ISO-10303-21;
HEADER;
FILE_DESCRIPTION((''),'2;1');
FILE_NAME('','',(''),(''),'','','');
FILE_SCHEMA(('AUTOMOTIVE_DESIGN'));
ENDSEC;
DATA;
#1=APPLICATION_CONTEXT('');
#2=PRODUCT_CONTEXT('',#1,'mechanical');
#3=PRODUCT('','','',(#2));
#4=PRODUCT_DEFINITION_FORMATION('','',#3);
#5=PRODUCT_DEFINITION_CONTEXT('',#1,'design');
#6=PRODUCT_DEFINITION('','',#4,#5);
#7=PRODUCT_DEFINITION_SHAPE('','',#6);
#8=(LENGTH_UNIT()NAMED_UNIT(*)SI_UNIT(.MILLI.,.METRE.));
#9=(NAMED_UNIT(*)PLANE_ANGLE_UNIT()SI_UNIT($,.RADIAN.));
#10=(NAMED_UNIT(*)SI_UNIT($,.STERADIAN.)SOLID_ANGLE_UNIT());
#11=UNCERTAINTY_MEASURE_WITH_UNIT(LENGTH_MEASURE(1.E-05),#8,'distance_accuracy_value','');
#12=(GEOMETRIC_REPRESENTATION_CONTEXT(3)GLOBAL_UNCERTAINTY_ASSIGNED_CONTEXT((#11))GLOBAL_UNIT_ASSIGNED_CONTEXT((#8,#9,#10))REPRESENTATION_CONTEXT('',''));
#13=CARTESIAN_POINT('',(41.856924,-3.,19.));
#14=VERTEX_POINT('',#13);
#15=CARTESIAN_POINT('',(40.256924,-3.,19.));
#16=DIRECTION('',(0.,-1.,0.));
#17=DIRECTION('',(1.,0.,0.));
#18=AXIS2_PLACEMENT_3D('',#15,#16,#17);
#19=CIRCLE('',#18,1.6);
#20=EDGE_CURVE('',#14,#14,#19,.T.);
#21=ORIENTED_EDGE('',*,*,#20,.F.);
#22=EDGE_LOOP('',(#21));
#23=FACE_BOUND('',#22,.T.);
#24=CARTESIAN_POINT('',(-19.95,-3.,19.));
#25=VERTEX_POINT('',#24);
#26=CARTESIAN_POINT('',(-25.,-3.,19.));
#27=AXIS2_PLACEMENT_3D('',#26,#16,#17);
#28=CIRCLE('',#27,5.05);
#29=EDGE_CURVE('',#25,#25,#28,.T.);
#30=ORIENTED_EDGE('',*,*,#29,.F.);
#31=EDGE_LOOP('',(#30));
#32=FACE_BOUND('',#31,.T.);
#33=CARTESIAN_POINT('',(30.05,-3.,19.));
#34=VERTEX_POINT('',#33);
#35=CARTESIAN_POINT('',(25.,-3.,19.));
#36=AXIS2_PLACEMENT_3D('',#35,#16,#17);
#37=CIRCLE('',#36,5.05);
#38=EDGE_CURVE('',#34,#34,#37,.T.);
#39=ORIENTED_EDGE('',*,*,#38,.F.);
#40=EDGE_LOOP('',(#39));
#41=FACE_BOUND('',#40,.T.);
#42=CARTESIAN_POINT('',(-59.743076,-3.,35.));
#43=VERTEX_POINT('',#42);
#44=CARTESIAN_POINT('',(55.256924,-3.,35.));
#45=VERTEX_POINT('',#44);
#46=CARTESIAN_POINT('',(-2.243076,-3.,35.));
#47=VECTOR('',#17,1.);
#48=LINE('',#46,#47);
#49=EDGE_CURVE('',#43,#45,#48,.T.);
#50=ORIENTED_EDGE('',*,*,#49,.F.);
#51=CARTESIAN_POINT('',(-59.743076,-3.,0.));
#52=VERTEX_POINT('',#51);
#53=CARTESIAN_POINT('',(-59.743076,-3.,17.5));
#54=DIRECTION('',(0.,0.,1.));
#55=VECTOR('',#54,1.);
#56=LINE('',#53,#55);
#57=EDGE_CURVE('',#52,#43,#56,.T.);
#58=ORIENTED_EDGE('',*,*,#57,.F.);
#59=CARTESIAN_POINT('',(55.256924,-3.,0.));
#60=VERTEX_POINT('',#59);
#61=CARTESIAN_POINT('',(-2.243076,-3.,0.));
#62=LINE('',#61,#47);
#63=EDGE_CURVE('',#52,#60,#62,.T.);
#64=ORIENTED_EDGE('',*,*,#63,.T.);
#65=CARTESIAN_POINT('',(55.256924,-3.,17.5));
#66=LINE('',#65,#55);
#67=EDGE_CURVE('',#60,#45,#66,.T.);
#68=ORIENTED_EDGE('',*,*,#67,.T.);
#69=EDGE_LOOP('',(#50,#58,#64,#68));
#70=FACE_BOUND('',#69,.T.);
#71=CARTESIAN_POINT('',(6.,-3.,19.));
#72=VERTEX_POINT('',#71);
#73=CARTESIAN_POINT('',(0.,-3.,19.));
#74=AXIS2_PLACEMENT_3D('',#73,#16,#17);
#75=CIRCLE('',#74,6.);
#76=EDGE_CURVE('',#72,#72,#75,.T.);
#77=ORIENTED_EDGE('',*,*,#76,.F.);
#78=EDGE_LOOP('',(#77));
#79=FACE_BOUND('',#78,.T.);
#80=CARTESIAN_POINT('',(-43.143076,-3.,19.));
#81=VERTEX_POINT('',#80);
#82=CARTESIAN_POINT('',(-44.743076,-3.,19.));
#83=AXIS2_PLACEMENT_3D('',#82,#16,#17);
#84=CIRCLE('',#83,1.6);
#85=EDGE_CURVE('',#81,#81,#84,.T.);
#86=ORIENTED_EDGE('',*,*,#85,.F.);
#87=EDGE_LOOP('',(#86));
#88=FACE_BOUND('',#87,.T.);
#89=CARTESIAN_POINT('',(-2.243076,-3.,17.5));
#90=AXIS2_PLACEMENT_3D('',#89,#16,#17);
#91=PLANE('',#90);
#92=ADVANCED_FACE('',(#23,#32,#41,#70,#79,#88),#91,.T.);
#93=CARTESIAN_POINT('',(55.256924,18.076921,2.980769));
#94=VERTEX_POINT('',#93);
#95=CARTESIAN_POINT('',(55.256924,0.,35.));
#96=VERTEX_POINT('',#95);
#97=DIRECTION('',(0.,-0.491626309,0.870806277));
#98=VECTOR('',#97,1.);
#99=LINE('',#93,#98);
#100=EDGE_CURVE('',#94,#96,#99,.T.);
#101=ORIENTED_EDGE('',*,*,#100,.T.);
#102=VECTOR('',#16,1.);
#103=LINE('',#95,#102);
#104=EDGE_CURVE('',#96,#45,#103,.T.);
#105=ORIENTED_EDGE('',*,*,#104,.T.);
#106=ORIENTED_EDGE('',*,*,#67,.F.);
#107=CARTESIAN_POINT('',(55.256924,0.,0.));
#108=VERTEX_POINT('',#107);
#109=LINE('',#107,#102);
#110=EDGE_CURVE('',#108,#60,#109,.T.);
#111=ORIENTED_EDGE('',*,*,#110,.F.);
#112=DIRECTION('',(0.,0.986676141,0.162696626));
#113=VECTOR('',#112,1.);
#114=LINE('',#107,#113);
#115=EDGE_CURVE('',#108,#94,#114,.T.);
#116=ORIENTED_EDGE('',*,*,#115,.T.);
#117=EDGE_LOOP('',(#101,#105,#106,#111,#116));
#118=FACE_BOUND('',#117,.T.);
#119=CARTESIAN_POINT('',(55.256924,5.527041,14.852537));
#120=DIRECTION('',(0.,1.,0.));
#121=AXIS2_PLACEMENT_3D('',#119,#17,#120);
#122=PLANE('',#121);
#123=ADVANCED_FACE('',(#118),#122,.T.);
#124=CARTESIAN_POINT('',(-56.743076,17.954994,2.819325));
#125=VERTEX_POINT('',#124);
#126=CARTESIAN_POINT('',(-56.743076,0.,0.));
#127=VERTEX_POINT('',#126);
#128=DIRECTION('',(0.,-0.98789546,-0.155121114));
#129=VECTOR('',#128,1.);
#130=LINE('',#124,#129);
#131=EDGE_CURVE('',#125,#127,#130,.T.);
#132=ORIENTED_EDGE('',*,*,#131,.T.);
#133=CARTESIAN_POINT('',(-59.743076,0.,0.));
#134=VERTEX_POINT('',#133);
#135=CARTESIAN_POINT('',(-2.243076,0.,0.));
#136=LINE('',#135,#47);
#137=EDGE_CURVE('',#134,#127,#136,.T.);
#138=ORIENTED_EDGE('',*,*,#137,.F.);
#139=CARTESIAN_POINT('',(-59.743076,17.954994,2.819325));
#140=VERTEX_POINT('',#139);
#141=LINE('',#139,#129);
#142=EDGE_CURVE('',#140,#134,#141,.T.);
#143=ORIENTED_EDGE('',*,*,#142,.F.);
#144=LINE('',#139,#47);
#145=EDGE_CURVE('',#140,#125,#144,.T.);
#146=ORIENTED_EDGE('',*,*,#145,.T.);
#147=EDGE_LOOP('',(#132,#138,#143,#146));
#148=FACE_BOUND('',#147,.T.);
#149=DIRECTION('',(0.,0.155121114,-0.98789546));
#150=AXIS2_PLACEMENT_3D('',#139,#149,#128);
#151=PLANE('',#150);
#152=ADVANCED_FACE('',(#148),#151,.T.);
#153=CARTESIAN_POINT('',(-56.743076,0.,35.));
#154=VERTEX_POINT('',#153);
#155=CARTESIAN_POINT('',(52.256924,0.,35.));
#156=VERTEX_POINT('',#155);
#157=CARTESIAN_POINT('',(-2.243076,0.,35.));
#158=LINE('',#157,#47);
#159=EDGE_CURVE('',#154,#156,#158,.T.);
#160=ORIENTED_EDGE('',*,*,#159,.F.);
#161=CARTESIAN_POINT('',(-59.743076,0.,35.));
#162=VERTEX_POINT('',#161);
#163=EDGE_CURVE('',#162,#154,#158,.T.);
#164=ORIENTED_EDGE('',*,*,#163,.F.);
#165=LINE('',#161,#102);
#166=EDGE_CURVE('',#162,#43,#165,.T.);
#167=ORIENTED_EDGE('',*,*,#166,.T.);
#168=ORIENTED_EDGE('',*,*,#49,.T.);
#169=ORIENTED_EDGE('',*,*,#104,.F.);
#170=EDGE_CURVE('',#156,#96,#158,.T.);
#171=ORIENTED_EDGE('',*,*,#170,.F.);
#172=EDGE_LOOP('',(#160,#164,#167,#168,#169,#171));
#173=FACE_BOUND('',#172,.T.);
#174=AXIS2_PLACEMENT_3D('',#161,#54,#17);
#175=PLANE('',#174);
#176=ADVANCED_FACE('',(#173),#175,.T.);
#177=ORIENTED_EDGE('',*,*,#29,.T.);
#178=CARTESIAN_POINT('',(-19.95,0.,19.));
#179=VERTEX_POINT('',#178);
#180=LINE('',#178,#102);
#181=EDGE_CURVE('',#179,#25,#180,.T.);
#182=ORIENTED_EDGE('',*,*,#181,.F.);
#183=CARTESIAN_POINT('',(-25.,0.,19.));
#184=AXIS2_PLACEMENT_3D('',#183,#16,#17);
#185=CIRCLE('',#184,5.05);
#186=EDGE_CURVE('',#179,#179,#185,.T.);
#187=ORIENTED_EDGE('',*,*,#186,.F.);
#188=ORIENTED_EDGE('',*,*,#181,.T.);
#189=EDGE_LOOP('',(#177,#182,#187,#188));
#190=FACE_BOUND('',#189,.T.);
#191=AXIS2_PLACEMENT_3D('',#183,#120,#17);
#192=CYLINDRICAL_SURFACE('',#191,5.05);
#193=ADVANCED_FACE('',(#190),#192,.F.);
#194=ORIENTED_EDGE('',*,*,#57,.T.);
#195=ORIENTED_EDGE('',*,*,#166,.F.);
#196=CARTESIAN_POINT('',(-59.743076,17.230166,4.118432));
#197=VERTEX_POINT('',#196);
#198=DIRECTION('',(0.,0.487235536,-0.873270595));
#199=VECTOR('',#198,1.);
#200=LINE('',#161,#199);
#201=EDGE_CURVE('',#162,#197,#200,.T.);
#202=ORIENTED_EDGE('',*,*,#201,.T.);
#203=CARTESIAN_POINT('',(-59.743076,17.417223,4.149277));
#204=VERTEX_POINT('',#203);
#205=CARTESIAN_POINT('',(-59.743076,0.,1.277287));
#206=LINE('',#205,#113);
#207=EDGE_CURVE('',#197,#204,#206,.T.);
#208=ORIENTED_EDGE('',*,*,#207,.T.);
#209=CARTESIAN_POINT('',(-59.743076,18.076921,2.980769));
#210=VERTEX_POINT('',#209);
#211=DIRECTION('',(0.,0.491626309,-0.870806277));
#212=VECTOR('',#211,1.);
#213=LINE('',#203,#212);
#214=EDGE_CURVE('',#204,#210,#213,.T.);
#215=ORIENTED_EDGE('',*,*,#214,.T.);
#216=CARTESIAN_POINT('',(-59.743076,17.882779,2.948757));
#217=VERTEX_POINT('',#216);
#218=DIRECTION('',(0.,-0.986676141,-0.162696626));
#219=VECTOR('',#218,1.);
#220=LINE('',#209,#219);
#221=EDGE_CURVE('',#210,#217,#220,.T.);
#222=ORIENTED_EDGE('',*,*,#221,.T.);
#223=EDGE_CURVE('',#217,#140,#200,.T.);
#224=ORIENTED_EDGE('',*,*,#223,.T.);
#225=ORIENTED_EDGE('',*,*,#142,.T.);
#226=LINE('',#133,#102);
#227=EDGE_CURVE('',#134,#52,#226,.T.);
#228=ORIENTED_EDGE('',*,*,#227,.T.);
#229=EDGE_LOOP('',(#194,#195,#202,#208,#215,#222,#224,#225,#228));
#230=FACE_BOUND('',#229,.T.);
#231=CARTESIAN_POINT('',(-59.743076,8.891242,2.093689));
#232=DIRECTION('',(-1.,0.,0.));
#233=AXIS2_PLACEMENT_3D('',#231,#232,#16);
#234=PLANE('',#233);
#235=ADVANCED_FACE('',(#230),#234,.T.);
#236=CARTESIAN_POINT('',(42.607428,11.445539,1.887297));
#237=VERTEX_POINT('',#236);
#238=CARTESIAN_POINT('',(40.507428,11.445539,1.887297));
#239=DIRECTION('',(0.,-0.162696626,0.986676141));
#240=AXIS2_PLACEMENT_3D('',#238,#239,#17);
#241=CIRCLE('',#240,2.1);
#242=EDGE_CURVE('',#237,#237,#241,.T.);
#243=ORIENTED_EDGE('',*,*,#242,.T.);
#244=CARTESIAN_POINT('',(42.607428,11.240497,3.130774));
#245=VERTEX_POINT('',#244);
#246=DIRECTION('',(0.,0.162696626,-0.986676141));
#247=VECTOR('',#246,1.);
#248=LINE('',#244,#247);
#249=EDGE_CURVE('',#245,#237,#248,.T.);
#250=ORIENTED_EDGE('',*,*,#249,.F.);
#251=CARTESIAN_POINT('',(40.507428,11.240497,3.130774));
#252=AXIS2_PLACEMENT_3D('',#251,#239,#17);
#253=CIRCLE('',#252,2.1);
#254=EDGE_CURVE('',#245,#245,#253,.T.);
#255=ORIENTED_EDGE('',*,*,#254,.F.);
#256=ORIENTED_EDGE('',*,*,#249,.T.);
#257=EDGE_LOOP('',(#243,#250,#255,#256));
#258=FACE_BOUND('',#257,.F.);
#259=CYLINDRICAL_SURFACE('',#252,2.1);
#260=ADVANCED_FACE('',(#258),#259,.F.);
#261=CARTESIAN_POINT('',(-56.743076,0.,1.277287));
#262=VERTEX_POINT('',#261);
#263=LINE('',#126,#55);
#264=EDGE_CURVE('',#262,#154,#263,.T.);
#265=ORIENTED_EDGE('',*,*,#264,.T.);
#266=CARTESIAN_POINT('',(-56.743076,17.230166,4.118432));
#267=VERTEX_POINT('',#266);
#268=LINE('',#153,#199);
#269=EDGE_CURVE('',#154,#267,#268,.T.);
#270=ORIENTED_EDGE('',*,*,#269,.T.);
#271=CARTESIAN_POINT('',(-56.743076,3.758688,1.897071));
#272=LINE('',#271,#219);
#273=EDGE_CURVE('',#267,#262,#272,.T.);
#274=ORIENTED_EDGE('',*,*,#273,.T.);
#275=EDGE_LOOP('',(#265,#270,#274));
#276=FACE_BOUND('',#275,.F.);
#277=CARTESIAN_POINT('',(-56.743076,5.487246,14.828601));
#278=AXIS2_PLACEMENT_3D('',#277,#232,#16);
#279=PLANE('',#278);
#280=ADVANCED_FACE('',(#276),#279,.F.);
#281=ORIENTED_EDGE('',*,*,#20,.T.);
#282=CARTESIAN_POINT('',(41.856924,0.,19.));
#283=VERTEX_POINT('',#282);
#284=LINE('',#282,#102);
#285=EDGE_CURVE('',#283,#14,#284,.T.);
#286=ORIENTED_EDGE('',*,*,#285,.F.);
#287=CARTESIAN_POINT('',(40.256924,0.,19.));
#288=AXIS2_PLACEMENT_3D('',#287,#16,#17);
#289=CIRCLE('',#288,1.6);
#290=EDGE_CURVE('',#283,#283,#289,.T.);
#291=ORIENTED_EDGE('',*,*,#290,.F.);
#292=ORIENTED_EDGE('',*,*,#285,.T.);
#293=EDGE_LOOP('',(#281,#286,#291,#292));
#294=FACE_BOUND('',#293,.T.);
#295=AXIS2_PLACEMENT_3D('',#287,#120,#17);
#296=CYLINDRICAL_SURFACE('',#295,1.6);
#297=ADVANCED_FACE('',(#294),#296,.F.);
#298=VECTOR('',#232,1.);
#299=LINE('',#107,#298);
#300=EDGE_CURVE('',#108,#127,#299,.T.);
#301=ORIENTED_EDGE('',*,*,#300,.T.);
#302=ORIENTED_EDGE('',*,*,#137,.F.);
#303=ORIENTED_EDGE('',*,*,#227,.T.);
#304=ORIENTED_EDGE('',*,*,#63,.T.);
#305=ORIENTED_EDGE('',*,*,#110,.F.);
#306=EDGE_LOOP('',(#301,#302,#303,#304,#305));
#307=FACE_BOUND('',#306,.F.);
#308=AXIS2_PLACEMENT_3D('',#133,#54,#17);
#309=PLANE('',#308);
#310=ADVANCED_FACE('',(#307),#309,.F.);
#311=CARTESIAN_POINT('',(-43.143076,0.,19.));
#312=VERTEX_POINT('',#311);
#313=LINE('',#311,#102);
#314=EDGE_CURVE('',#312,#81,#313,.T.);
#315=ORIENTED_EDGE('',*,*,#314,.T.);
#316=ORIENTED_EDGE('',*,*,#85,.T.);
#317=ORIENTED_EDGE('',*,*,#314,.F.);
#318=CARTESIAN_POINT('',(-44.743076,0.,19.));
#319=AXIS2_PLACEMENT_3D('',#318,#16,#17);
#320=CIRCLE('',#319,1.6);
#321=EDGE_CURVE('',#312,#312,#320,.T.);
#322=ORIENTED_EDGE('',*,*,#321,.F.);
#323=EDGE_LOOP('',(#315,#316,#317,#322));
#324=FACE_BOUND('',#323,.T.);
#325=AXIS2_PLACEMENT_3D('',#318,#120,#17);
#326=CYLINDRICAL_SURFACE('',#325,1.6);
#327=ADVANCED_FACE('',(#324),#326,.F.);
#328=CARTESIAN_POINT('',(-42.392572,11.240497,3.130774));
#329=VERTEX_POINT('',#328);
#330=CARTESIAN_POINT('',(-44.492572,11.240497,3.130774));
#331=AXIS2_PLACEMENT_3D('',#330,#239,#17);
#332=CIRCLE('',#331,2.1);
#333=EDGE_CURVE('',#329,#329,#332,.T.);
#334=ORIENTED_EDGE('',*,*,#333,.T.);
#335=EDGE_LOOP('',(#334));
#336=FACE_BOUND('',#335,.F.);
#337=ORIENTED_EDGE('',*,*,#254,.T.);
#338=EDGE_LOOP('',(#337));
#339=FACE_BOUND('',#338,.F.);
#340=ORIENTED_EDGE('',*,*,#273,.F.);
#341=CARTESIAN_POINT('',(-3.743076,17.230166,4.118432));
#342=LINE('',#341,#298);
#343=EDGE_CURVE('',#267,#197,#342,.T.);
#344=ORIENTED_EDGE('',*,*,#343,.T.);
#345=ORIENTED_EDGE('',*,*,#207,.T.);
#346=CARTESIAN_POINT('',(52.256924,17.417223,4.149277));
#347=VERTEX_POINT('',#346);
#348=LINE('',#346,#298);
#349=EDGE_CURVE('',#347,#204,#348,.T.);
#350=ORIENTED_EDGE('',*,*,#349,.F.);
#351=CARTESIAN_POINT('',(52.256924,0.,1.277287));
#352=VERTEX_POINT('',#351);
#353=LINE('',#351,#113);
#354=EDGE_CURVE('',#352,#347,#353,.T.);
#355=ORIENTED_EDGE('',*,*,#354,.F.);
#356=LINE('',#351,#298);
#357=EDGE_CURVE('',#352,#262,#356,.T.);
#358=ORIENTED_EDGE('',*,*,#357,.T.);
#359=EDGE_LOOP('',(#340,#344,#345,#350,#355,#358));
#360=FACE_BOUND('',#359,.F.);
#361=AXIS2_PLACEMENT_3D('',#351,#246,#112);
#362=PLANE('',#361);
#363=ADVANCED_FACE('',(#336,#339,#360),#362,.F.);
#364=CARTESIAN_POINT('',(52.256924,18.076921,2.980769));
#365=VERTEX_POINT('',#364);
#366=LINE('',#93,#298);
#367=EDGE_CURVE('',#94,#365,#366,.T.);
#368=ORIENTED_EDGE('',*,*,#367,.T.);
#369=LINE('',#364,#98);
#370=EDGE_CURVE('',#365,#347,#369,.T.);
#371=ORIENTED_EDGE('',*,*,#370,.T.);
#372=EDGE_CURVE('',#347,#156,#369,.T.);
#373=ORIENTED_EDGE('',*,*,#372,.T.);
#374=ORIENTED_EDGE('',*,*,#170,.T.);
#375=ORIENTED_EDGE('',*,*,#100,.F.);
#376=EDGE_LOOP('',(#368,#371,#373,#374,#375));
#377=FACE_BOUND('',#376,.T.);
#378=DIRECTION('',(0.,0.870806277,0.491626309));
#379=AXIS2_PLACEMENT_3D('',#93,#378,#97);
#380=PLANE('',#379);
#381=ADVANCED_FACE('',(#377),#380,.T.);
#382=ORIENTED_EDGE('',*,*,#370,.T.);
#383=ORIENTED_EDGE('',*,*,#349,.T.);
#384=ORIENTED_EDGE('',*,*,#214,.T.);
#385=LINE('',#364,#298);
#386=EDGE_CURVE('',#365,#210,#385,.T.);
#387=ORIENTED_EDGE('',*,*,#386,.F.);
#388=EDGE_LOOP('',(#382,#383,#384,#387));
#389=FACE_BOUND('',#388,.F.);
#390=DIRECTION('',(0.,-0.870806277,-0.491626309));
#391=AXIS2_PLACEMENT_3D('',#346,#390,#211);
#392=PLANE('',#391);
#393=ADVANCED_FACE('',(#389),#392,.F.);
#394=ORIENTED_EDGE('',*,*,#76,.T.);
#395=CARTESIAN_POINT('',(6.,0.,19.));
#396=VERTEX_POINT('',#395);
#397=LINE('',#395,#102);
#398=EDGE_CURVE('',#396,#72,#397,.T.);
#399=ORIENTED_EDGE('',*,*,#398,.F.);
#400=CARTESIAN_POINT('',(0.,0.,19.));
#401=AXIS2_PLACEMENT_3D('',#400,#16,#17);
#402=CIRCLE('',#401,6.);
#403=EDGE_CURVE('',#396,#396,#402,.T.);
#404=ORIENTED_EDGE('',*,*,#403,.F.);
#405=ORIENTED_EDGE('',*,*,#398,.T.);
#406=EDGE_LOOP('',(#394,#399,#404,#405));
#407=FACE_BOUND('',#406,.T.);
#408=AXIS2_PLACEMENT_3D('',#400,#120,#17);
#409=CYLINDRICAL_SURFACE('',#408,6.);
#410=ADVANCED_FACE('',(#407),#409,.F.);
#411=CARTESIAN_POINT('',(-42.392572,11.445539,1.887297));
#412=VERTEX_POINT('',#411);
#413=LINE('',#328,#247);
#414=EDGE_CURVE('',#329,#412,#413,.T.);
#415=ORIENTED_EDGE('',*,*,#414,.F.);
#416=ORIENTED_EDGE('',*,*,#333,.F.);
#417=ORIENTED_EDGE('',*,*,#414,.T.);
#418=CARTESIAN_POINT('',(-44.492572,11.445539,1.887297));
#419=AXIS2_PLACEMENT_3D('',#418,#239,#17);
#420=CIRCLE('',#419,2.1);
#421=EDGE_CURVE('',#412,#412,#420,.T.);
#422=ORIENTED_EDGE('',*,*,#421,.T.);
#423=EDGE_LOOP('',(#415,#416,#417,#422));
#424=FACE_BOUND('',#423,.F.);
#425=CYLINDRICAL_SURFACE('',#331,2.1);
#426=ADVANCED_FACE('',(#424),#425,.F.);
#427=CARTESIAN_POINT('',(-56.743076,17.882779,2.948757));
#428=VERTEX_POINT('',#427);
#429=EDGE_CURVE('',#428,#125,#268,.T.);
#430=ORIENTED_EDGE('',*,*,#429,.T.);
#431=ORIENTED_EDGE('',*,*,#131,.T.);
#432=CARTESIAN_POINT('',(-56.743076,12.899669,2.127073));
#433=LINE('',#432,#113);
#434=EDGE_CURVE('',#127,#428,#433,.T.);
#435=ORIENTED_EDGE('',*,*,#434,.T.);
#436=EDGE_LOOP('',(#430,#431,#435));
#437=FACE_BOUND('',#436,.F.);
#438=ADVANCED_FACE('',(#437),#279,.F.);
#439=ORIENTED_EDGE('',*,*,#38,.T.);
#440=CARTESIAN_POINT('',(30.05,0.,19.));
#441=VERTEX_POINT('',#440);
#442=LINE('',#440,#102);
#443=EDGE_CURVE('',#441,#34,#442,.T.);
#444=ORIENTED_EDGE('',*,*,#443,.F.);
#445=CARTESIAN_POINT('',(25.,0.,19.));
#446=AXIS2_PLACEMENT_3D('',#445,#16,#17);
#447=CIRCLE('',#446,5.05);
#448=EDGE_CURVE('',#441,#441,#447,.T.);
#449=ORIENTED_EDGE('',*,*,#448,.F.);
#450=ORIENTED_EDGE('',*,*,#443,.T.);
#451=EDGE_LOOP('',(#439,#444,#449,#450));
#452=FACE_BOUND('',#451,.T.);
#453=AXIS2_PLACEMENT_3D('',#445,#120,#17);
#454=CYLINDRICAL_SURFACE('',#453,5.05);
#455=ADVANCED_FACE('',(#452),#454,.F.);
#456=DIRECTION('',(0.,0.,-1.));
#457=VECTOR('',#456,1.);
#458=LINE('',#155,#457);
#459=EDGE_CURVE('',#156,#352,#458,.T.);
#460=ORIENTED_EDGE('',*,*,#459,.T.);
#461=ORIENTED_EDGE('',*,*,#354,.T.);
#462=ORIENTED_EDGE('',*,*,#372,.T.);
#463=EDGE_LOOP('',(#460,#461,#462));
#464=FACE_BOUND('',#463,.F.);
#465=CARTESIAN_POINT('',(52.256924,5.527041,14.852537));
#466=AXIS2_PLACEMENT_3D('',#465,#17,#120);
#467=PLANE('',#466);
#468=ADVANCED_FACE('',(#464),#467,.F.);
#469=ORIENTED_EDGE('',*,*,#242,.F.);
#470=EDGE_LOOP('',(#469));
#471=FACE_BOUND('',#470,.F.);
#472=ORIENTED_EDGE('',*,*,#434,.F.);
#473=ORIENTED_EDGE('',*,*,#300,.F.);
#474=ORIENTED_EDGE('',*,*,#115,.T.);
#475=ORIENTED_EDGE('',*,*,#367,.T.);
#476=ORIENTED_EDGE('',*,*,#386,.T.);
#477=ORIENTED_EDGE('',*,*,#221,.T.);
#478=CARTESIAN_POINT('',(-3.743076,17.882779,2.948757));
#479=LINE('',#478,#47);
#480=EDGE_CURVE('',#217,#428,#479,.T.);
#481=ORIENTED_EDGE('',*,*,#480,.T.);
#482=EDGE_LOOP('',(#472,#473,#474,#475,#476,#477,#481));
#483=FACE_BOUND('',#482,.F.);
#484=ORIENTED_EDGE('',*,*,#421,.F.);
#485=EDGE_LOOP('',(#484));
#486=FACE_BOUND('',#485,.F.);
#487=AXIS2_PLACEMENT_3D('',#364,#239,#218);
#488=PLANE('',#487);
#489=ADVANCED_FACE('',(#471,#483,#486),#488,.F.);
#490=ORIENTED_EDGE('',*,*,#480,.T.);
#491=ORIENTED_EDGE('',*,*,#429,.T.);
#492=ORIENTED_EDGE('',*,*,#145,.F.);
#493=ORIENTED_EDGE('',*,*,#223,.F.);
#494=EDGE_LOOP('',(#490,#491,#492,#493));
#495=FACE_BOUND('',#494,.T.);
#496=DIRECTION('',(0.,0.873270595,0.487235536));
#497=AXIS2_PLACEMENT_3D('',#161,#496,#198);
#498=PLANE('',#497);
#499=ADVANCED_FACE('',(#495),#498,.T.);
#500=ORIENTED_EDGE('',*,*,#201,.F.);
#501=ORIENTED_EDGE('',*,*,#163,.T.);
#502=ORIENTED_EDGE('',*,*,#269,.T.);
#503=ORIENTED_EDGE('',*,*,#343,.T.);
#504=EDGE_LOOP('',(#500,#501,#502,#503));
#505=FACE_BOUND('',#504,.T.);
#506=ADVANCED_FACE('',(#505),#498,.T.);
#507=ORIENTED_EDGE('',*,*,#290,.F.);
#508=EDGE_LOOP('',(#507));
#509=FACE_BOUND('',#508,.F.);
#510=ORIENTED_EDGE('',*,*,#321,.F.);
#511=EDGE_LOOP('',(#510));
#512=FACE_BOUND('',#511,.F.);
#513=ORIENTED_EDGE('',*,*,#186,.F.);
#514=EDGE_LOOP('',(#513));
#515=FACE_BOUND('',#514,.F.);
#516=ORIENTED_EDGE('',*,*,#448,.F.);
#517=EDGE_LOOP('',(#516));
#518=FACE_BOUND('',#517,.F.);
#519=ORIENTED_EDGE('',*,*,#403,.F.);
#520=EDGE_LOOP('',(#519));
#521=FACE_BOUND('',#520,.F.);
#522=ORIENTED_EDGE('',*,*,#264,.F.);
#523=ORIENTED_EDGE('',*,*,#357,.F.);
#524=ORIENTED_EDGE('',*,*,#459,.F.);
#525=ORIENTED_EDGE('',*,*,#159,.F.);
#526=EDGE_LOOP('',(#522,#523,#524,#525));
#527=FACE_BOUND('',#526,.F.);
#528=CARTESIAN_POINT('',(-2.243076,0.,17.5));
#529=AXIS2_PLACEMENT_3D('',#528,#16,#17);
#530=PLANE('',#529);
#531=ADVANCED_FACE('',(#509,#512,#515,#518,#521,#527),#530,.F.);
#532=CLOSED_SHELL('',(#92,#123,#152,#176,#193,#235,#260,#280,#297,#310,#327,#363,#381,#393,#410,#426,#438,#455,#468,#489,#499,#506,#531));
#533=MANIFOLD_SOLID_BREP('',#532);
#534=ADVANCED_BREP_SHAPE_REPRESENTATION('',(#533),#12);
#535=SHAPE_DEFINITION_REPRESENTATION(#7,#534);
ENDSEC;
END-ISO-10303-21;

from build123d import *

# Parameters (mm, degrees)
F0_W     = 115
F0_H     = 35
F0_R     = 1.6
F0_R_2   = 5.05
F0_R_3   = 6
F1_DEPTH = 3
F3_DEPTH = 3
F5_DEPTH = 3
F7_DEPTH = 112
F8_R     = 2.1
F9_DEPTH = 4.2023227536


with BuildPart() as f1:
    # F0 (on Front) → F1 (new body)
    with BuildSketch(Plane.XZ):
        with Locations((-2.2430759668, 17.5)):
            Rectangle(F0_W, F0_H)
        with Locations((-44.7430759668, 19)):
            Circle(F0_R, mode=Mode.SUBTRACT)
        with Locations((-25, 19)):
            Circle(F0_R_2, mode=Mode.SUBTRACT)
        with Locations((0, 19)):
            Circle(F0_R_3, mode=Mode.SUBTRACT)
        with Locations((25, 19)):
            Circle(F0_R_2, mode=Mode.SUBTRACT)
        with Locations((40.2569240332, 19)):
            Circle(F0_R, mode=Mode.SUBTRACT)
    extrude(amount=F1_DEPTH)

    # F2 (on face) → F3 (join)
    with BuildSketch(Plane(origin=(-59.7430759668, 0, 0), x_dir=(0, -1, 0), z_dir=(-1, 0, 0))):
        Polygon((0, 0), (0, 35), (-17.954993993, 2.8193253092), align=None)
    extrude(amount=-F3_DEPTH)

    # F4 (on face) → F5 (join)
    with BuildSketch(Plane.YZ.offset(55.2569240332)):
        Polygon((18.0769208819, 2.9807693791), (0, 35), (0, 0), align=None)
    extrude(amount=-F5_DEPTH)

    # F6 (on face) → F7 (join)
    with BuildSketch(Plane(origin=(52.2569240332, 0, 0), x_dir=(0, -1, 0), z_dir=(-1, 0, 0))):
        Polygon((-17.4172232201, 4.1492765441), (-18.0769208819, 2.9807693791), (0, 0), (0, 1.2772871172), align=None)
    extrude(amount=F7_DEPTH)

    # F8 (on face) → F9 (cut, through all)
    with BuildSketch(Plane(origin=(0, -0.2050414688, 1.243477082), x_dir=(1, 0, 0), z_dir=(0, -0.1626966256, 0.9866761414))):
        with Locations((40.5074283481, 11.60009671)):
            Circle(F8_R)
        with Locations((-44.4925716519, 11.60009671)):
            Circle(F8_R)
    extrude(amount=-F9_DEPTH, mode=Mode.SUBTRACT)


solid = f1.part
